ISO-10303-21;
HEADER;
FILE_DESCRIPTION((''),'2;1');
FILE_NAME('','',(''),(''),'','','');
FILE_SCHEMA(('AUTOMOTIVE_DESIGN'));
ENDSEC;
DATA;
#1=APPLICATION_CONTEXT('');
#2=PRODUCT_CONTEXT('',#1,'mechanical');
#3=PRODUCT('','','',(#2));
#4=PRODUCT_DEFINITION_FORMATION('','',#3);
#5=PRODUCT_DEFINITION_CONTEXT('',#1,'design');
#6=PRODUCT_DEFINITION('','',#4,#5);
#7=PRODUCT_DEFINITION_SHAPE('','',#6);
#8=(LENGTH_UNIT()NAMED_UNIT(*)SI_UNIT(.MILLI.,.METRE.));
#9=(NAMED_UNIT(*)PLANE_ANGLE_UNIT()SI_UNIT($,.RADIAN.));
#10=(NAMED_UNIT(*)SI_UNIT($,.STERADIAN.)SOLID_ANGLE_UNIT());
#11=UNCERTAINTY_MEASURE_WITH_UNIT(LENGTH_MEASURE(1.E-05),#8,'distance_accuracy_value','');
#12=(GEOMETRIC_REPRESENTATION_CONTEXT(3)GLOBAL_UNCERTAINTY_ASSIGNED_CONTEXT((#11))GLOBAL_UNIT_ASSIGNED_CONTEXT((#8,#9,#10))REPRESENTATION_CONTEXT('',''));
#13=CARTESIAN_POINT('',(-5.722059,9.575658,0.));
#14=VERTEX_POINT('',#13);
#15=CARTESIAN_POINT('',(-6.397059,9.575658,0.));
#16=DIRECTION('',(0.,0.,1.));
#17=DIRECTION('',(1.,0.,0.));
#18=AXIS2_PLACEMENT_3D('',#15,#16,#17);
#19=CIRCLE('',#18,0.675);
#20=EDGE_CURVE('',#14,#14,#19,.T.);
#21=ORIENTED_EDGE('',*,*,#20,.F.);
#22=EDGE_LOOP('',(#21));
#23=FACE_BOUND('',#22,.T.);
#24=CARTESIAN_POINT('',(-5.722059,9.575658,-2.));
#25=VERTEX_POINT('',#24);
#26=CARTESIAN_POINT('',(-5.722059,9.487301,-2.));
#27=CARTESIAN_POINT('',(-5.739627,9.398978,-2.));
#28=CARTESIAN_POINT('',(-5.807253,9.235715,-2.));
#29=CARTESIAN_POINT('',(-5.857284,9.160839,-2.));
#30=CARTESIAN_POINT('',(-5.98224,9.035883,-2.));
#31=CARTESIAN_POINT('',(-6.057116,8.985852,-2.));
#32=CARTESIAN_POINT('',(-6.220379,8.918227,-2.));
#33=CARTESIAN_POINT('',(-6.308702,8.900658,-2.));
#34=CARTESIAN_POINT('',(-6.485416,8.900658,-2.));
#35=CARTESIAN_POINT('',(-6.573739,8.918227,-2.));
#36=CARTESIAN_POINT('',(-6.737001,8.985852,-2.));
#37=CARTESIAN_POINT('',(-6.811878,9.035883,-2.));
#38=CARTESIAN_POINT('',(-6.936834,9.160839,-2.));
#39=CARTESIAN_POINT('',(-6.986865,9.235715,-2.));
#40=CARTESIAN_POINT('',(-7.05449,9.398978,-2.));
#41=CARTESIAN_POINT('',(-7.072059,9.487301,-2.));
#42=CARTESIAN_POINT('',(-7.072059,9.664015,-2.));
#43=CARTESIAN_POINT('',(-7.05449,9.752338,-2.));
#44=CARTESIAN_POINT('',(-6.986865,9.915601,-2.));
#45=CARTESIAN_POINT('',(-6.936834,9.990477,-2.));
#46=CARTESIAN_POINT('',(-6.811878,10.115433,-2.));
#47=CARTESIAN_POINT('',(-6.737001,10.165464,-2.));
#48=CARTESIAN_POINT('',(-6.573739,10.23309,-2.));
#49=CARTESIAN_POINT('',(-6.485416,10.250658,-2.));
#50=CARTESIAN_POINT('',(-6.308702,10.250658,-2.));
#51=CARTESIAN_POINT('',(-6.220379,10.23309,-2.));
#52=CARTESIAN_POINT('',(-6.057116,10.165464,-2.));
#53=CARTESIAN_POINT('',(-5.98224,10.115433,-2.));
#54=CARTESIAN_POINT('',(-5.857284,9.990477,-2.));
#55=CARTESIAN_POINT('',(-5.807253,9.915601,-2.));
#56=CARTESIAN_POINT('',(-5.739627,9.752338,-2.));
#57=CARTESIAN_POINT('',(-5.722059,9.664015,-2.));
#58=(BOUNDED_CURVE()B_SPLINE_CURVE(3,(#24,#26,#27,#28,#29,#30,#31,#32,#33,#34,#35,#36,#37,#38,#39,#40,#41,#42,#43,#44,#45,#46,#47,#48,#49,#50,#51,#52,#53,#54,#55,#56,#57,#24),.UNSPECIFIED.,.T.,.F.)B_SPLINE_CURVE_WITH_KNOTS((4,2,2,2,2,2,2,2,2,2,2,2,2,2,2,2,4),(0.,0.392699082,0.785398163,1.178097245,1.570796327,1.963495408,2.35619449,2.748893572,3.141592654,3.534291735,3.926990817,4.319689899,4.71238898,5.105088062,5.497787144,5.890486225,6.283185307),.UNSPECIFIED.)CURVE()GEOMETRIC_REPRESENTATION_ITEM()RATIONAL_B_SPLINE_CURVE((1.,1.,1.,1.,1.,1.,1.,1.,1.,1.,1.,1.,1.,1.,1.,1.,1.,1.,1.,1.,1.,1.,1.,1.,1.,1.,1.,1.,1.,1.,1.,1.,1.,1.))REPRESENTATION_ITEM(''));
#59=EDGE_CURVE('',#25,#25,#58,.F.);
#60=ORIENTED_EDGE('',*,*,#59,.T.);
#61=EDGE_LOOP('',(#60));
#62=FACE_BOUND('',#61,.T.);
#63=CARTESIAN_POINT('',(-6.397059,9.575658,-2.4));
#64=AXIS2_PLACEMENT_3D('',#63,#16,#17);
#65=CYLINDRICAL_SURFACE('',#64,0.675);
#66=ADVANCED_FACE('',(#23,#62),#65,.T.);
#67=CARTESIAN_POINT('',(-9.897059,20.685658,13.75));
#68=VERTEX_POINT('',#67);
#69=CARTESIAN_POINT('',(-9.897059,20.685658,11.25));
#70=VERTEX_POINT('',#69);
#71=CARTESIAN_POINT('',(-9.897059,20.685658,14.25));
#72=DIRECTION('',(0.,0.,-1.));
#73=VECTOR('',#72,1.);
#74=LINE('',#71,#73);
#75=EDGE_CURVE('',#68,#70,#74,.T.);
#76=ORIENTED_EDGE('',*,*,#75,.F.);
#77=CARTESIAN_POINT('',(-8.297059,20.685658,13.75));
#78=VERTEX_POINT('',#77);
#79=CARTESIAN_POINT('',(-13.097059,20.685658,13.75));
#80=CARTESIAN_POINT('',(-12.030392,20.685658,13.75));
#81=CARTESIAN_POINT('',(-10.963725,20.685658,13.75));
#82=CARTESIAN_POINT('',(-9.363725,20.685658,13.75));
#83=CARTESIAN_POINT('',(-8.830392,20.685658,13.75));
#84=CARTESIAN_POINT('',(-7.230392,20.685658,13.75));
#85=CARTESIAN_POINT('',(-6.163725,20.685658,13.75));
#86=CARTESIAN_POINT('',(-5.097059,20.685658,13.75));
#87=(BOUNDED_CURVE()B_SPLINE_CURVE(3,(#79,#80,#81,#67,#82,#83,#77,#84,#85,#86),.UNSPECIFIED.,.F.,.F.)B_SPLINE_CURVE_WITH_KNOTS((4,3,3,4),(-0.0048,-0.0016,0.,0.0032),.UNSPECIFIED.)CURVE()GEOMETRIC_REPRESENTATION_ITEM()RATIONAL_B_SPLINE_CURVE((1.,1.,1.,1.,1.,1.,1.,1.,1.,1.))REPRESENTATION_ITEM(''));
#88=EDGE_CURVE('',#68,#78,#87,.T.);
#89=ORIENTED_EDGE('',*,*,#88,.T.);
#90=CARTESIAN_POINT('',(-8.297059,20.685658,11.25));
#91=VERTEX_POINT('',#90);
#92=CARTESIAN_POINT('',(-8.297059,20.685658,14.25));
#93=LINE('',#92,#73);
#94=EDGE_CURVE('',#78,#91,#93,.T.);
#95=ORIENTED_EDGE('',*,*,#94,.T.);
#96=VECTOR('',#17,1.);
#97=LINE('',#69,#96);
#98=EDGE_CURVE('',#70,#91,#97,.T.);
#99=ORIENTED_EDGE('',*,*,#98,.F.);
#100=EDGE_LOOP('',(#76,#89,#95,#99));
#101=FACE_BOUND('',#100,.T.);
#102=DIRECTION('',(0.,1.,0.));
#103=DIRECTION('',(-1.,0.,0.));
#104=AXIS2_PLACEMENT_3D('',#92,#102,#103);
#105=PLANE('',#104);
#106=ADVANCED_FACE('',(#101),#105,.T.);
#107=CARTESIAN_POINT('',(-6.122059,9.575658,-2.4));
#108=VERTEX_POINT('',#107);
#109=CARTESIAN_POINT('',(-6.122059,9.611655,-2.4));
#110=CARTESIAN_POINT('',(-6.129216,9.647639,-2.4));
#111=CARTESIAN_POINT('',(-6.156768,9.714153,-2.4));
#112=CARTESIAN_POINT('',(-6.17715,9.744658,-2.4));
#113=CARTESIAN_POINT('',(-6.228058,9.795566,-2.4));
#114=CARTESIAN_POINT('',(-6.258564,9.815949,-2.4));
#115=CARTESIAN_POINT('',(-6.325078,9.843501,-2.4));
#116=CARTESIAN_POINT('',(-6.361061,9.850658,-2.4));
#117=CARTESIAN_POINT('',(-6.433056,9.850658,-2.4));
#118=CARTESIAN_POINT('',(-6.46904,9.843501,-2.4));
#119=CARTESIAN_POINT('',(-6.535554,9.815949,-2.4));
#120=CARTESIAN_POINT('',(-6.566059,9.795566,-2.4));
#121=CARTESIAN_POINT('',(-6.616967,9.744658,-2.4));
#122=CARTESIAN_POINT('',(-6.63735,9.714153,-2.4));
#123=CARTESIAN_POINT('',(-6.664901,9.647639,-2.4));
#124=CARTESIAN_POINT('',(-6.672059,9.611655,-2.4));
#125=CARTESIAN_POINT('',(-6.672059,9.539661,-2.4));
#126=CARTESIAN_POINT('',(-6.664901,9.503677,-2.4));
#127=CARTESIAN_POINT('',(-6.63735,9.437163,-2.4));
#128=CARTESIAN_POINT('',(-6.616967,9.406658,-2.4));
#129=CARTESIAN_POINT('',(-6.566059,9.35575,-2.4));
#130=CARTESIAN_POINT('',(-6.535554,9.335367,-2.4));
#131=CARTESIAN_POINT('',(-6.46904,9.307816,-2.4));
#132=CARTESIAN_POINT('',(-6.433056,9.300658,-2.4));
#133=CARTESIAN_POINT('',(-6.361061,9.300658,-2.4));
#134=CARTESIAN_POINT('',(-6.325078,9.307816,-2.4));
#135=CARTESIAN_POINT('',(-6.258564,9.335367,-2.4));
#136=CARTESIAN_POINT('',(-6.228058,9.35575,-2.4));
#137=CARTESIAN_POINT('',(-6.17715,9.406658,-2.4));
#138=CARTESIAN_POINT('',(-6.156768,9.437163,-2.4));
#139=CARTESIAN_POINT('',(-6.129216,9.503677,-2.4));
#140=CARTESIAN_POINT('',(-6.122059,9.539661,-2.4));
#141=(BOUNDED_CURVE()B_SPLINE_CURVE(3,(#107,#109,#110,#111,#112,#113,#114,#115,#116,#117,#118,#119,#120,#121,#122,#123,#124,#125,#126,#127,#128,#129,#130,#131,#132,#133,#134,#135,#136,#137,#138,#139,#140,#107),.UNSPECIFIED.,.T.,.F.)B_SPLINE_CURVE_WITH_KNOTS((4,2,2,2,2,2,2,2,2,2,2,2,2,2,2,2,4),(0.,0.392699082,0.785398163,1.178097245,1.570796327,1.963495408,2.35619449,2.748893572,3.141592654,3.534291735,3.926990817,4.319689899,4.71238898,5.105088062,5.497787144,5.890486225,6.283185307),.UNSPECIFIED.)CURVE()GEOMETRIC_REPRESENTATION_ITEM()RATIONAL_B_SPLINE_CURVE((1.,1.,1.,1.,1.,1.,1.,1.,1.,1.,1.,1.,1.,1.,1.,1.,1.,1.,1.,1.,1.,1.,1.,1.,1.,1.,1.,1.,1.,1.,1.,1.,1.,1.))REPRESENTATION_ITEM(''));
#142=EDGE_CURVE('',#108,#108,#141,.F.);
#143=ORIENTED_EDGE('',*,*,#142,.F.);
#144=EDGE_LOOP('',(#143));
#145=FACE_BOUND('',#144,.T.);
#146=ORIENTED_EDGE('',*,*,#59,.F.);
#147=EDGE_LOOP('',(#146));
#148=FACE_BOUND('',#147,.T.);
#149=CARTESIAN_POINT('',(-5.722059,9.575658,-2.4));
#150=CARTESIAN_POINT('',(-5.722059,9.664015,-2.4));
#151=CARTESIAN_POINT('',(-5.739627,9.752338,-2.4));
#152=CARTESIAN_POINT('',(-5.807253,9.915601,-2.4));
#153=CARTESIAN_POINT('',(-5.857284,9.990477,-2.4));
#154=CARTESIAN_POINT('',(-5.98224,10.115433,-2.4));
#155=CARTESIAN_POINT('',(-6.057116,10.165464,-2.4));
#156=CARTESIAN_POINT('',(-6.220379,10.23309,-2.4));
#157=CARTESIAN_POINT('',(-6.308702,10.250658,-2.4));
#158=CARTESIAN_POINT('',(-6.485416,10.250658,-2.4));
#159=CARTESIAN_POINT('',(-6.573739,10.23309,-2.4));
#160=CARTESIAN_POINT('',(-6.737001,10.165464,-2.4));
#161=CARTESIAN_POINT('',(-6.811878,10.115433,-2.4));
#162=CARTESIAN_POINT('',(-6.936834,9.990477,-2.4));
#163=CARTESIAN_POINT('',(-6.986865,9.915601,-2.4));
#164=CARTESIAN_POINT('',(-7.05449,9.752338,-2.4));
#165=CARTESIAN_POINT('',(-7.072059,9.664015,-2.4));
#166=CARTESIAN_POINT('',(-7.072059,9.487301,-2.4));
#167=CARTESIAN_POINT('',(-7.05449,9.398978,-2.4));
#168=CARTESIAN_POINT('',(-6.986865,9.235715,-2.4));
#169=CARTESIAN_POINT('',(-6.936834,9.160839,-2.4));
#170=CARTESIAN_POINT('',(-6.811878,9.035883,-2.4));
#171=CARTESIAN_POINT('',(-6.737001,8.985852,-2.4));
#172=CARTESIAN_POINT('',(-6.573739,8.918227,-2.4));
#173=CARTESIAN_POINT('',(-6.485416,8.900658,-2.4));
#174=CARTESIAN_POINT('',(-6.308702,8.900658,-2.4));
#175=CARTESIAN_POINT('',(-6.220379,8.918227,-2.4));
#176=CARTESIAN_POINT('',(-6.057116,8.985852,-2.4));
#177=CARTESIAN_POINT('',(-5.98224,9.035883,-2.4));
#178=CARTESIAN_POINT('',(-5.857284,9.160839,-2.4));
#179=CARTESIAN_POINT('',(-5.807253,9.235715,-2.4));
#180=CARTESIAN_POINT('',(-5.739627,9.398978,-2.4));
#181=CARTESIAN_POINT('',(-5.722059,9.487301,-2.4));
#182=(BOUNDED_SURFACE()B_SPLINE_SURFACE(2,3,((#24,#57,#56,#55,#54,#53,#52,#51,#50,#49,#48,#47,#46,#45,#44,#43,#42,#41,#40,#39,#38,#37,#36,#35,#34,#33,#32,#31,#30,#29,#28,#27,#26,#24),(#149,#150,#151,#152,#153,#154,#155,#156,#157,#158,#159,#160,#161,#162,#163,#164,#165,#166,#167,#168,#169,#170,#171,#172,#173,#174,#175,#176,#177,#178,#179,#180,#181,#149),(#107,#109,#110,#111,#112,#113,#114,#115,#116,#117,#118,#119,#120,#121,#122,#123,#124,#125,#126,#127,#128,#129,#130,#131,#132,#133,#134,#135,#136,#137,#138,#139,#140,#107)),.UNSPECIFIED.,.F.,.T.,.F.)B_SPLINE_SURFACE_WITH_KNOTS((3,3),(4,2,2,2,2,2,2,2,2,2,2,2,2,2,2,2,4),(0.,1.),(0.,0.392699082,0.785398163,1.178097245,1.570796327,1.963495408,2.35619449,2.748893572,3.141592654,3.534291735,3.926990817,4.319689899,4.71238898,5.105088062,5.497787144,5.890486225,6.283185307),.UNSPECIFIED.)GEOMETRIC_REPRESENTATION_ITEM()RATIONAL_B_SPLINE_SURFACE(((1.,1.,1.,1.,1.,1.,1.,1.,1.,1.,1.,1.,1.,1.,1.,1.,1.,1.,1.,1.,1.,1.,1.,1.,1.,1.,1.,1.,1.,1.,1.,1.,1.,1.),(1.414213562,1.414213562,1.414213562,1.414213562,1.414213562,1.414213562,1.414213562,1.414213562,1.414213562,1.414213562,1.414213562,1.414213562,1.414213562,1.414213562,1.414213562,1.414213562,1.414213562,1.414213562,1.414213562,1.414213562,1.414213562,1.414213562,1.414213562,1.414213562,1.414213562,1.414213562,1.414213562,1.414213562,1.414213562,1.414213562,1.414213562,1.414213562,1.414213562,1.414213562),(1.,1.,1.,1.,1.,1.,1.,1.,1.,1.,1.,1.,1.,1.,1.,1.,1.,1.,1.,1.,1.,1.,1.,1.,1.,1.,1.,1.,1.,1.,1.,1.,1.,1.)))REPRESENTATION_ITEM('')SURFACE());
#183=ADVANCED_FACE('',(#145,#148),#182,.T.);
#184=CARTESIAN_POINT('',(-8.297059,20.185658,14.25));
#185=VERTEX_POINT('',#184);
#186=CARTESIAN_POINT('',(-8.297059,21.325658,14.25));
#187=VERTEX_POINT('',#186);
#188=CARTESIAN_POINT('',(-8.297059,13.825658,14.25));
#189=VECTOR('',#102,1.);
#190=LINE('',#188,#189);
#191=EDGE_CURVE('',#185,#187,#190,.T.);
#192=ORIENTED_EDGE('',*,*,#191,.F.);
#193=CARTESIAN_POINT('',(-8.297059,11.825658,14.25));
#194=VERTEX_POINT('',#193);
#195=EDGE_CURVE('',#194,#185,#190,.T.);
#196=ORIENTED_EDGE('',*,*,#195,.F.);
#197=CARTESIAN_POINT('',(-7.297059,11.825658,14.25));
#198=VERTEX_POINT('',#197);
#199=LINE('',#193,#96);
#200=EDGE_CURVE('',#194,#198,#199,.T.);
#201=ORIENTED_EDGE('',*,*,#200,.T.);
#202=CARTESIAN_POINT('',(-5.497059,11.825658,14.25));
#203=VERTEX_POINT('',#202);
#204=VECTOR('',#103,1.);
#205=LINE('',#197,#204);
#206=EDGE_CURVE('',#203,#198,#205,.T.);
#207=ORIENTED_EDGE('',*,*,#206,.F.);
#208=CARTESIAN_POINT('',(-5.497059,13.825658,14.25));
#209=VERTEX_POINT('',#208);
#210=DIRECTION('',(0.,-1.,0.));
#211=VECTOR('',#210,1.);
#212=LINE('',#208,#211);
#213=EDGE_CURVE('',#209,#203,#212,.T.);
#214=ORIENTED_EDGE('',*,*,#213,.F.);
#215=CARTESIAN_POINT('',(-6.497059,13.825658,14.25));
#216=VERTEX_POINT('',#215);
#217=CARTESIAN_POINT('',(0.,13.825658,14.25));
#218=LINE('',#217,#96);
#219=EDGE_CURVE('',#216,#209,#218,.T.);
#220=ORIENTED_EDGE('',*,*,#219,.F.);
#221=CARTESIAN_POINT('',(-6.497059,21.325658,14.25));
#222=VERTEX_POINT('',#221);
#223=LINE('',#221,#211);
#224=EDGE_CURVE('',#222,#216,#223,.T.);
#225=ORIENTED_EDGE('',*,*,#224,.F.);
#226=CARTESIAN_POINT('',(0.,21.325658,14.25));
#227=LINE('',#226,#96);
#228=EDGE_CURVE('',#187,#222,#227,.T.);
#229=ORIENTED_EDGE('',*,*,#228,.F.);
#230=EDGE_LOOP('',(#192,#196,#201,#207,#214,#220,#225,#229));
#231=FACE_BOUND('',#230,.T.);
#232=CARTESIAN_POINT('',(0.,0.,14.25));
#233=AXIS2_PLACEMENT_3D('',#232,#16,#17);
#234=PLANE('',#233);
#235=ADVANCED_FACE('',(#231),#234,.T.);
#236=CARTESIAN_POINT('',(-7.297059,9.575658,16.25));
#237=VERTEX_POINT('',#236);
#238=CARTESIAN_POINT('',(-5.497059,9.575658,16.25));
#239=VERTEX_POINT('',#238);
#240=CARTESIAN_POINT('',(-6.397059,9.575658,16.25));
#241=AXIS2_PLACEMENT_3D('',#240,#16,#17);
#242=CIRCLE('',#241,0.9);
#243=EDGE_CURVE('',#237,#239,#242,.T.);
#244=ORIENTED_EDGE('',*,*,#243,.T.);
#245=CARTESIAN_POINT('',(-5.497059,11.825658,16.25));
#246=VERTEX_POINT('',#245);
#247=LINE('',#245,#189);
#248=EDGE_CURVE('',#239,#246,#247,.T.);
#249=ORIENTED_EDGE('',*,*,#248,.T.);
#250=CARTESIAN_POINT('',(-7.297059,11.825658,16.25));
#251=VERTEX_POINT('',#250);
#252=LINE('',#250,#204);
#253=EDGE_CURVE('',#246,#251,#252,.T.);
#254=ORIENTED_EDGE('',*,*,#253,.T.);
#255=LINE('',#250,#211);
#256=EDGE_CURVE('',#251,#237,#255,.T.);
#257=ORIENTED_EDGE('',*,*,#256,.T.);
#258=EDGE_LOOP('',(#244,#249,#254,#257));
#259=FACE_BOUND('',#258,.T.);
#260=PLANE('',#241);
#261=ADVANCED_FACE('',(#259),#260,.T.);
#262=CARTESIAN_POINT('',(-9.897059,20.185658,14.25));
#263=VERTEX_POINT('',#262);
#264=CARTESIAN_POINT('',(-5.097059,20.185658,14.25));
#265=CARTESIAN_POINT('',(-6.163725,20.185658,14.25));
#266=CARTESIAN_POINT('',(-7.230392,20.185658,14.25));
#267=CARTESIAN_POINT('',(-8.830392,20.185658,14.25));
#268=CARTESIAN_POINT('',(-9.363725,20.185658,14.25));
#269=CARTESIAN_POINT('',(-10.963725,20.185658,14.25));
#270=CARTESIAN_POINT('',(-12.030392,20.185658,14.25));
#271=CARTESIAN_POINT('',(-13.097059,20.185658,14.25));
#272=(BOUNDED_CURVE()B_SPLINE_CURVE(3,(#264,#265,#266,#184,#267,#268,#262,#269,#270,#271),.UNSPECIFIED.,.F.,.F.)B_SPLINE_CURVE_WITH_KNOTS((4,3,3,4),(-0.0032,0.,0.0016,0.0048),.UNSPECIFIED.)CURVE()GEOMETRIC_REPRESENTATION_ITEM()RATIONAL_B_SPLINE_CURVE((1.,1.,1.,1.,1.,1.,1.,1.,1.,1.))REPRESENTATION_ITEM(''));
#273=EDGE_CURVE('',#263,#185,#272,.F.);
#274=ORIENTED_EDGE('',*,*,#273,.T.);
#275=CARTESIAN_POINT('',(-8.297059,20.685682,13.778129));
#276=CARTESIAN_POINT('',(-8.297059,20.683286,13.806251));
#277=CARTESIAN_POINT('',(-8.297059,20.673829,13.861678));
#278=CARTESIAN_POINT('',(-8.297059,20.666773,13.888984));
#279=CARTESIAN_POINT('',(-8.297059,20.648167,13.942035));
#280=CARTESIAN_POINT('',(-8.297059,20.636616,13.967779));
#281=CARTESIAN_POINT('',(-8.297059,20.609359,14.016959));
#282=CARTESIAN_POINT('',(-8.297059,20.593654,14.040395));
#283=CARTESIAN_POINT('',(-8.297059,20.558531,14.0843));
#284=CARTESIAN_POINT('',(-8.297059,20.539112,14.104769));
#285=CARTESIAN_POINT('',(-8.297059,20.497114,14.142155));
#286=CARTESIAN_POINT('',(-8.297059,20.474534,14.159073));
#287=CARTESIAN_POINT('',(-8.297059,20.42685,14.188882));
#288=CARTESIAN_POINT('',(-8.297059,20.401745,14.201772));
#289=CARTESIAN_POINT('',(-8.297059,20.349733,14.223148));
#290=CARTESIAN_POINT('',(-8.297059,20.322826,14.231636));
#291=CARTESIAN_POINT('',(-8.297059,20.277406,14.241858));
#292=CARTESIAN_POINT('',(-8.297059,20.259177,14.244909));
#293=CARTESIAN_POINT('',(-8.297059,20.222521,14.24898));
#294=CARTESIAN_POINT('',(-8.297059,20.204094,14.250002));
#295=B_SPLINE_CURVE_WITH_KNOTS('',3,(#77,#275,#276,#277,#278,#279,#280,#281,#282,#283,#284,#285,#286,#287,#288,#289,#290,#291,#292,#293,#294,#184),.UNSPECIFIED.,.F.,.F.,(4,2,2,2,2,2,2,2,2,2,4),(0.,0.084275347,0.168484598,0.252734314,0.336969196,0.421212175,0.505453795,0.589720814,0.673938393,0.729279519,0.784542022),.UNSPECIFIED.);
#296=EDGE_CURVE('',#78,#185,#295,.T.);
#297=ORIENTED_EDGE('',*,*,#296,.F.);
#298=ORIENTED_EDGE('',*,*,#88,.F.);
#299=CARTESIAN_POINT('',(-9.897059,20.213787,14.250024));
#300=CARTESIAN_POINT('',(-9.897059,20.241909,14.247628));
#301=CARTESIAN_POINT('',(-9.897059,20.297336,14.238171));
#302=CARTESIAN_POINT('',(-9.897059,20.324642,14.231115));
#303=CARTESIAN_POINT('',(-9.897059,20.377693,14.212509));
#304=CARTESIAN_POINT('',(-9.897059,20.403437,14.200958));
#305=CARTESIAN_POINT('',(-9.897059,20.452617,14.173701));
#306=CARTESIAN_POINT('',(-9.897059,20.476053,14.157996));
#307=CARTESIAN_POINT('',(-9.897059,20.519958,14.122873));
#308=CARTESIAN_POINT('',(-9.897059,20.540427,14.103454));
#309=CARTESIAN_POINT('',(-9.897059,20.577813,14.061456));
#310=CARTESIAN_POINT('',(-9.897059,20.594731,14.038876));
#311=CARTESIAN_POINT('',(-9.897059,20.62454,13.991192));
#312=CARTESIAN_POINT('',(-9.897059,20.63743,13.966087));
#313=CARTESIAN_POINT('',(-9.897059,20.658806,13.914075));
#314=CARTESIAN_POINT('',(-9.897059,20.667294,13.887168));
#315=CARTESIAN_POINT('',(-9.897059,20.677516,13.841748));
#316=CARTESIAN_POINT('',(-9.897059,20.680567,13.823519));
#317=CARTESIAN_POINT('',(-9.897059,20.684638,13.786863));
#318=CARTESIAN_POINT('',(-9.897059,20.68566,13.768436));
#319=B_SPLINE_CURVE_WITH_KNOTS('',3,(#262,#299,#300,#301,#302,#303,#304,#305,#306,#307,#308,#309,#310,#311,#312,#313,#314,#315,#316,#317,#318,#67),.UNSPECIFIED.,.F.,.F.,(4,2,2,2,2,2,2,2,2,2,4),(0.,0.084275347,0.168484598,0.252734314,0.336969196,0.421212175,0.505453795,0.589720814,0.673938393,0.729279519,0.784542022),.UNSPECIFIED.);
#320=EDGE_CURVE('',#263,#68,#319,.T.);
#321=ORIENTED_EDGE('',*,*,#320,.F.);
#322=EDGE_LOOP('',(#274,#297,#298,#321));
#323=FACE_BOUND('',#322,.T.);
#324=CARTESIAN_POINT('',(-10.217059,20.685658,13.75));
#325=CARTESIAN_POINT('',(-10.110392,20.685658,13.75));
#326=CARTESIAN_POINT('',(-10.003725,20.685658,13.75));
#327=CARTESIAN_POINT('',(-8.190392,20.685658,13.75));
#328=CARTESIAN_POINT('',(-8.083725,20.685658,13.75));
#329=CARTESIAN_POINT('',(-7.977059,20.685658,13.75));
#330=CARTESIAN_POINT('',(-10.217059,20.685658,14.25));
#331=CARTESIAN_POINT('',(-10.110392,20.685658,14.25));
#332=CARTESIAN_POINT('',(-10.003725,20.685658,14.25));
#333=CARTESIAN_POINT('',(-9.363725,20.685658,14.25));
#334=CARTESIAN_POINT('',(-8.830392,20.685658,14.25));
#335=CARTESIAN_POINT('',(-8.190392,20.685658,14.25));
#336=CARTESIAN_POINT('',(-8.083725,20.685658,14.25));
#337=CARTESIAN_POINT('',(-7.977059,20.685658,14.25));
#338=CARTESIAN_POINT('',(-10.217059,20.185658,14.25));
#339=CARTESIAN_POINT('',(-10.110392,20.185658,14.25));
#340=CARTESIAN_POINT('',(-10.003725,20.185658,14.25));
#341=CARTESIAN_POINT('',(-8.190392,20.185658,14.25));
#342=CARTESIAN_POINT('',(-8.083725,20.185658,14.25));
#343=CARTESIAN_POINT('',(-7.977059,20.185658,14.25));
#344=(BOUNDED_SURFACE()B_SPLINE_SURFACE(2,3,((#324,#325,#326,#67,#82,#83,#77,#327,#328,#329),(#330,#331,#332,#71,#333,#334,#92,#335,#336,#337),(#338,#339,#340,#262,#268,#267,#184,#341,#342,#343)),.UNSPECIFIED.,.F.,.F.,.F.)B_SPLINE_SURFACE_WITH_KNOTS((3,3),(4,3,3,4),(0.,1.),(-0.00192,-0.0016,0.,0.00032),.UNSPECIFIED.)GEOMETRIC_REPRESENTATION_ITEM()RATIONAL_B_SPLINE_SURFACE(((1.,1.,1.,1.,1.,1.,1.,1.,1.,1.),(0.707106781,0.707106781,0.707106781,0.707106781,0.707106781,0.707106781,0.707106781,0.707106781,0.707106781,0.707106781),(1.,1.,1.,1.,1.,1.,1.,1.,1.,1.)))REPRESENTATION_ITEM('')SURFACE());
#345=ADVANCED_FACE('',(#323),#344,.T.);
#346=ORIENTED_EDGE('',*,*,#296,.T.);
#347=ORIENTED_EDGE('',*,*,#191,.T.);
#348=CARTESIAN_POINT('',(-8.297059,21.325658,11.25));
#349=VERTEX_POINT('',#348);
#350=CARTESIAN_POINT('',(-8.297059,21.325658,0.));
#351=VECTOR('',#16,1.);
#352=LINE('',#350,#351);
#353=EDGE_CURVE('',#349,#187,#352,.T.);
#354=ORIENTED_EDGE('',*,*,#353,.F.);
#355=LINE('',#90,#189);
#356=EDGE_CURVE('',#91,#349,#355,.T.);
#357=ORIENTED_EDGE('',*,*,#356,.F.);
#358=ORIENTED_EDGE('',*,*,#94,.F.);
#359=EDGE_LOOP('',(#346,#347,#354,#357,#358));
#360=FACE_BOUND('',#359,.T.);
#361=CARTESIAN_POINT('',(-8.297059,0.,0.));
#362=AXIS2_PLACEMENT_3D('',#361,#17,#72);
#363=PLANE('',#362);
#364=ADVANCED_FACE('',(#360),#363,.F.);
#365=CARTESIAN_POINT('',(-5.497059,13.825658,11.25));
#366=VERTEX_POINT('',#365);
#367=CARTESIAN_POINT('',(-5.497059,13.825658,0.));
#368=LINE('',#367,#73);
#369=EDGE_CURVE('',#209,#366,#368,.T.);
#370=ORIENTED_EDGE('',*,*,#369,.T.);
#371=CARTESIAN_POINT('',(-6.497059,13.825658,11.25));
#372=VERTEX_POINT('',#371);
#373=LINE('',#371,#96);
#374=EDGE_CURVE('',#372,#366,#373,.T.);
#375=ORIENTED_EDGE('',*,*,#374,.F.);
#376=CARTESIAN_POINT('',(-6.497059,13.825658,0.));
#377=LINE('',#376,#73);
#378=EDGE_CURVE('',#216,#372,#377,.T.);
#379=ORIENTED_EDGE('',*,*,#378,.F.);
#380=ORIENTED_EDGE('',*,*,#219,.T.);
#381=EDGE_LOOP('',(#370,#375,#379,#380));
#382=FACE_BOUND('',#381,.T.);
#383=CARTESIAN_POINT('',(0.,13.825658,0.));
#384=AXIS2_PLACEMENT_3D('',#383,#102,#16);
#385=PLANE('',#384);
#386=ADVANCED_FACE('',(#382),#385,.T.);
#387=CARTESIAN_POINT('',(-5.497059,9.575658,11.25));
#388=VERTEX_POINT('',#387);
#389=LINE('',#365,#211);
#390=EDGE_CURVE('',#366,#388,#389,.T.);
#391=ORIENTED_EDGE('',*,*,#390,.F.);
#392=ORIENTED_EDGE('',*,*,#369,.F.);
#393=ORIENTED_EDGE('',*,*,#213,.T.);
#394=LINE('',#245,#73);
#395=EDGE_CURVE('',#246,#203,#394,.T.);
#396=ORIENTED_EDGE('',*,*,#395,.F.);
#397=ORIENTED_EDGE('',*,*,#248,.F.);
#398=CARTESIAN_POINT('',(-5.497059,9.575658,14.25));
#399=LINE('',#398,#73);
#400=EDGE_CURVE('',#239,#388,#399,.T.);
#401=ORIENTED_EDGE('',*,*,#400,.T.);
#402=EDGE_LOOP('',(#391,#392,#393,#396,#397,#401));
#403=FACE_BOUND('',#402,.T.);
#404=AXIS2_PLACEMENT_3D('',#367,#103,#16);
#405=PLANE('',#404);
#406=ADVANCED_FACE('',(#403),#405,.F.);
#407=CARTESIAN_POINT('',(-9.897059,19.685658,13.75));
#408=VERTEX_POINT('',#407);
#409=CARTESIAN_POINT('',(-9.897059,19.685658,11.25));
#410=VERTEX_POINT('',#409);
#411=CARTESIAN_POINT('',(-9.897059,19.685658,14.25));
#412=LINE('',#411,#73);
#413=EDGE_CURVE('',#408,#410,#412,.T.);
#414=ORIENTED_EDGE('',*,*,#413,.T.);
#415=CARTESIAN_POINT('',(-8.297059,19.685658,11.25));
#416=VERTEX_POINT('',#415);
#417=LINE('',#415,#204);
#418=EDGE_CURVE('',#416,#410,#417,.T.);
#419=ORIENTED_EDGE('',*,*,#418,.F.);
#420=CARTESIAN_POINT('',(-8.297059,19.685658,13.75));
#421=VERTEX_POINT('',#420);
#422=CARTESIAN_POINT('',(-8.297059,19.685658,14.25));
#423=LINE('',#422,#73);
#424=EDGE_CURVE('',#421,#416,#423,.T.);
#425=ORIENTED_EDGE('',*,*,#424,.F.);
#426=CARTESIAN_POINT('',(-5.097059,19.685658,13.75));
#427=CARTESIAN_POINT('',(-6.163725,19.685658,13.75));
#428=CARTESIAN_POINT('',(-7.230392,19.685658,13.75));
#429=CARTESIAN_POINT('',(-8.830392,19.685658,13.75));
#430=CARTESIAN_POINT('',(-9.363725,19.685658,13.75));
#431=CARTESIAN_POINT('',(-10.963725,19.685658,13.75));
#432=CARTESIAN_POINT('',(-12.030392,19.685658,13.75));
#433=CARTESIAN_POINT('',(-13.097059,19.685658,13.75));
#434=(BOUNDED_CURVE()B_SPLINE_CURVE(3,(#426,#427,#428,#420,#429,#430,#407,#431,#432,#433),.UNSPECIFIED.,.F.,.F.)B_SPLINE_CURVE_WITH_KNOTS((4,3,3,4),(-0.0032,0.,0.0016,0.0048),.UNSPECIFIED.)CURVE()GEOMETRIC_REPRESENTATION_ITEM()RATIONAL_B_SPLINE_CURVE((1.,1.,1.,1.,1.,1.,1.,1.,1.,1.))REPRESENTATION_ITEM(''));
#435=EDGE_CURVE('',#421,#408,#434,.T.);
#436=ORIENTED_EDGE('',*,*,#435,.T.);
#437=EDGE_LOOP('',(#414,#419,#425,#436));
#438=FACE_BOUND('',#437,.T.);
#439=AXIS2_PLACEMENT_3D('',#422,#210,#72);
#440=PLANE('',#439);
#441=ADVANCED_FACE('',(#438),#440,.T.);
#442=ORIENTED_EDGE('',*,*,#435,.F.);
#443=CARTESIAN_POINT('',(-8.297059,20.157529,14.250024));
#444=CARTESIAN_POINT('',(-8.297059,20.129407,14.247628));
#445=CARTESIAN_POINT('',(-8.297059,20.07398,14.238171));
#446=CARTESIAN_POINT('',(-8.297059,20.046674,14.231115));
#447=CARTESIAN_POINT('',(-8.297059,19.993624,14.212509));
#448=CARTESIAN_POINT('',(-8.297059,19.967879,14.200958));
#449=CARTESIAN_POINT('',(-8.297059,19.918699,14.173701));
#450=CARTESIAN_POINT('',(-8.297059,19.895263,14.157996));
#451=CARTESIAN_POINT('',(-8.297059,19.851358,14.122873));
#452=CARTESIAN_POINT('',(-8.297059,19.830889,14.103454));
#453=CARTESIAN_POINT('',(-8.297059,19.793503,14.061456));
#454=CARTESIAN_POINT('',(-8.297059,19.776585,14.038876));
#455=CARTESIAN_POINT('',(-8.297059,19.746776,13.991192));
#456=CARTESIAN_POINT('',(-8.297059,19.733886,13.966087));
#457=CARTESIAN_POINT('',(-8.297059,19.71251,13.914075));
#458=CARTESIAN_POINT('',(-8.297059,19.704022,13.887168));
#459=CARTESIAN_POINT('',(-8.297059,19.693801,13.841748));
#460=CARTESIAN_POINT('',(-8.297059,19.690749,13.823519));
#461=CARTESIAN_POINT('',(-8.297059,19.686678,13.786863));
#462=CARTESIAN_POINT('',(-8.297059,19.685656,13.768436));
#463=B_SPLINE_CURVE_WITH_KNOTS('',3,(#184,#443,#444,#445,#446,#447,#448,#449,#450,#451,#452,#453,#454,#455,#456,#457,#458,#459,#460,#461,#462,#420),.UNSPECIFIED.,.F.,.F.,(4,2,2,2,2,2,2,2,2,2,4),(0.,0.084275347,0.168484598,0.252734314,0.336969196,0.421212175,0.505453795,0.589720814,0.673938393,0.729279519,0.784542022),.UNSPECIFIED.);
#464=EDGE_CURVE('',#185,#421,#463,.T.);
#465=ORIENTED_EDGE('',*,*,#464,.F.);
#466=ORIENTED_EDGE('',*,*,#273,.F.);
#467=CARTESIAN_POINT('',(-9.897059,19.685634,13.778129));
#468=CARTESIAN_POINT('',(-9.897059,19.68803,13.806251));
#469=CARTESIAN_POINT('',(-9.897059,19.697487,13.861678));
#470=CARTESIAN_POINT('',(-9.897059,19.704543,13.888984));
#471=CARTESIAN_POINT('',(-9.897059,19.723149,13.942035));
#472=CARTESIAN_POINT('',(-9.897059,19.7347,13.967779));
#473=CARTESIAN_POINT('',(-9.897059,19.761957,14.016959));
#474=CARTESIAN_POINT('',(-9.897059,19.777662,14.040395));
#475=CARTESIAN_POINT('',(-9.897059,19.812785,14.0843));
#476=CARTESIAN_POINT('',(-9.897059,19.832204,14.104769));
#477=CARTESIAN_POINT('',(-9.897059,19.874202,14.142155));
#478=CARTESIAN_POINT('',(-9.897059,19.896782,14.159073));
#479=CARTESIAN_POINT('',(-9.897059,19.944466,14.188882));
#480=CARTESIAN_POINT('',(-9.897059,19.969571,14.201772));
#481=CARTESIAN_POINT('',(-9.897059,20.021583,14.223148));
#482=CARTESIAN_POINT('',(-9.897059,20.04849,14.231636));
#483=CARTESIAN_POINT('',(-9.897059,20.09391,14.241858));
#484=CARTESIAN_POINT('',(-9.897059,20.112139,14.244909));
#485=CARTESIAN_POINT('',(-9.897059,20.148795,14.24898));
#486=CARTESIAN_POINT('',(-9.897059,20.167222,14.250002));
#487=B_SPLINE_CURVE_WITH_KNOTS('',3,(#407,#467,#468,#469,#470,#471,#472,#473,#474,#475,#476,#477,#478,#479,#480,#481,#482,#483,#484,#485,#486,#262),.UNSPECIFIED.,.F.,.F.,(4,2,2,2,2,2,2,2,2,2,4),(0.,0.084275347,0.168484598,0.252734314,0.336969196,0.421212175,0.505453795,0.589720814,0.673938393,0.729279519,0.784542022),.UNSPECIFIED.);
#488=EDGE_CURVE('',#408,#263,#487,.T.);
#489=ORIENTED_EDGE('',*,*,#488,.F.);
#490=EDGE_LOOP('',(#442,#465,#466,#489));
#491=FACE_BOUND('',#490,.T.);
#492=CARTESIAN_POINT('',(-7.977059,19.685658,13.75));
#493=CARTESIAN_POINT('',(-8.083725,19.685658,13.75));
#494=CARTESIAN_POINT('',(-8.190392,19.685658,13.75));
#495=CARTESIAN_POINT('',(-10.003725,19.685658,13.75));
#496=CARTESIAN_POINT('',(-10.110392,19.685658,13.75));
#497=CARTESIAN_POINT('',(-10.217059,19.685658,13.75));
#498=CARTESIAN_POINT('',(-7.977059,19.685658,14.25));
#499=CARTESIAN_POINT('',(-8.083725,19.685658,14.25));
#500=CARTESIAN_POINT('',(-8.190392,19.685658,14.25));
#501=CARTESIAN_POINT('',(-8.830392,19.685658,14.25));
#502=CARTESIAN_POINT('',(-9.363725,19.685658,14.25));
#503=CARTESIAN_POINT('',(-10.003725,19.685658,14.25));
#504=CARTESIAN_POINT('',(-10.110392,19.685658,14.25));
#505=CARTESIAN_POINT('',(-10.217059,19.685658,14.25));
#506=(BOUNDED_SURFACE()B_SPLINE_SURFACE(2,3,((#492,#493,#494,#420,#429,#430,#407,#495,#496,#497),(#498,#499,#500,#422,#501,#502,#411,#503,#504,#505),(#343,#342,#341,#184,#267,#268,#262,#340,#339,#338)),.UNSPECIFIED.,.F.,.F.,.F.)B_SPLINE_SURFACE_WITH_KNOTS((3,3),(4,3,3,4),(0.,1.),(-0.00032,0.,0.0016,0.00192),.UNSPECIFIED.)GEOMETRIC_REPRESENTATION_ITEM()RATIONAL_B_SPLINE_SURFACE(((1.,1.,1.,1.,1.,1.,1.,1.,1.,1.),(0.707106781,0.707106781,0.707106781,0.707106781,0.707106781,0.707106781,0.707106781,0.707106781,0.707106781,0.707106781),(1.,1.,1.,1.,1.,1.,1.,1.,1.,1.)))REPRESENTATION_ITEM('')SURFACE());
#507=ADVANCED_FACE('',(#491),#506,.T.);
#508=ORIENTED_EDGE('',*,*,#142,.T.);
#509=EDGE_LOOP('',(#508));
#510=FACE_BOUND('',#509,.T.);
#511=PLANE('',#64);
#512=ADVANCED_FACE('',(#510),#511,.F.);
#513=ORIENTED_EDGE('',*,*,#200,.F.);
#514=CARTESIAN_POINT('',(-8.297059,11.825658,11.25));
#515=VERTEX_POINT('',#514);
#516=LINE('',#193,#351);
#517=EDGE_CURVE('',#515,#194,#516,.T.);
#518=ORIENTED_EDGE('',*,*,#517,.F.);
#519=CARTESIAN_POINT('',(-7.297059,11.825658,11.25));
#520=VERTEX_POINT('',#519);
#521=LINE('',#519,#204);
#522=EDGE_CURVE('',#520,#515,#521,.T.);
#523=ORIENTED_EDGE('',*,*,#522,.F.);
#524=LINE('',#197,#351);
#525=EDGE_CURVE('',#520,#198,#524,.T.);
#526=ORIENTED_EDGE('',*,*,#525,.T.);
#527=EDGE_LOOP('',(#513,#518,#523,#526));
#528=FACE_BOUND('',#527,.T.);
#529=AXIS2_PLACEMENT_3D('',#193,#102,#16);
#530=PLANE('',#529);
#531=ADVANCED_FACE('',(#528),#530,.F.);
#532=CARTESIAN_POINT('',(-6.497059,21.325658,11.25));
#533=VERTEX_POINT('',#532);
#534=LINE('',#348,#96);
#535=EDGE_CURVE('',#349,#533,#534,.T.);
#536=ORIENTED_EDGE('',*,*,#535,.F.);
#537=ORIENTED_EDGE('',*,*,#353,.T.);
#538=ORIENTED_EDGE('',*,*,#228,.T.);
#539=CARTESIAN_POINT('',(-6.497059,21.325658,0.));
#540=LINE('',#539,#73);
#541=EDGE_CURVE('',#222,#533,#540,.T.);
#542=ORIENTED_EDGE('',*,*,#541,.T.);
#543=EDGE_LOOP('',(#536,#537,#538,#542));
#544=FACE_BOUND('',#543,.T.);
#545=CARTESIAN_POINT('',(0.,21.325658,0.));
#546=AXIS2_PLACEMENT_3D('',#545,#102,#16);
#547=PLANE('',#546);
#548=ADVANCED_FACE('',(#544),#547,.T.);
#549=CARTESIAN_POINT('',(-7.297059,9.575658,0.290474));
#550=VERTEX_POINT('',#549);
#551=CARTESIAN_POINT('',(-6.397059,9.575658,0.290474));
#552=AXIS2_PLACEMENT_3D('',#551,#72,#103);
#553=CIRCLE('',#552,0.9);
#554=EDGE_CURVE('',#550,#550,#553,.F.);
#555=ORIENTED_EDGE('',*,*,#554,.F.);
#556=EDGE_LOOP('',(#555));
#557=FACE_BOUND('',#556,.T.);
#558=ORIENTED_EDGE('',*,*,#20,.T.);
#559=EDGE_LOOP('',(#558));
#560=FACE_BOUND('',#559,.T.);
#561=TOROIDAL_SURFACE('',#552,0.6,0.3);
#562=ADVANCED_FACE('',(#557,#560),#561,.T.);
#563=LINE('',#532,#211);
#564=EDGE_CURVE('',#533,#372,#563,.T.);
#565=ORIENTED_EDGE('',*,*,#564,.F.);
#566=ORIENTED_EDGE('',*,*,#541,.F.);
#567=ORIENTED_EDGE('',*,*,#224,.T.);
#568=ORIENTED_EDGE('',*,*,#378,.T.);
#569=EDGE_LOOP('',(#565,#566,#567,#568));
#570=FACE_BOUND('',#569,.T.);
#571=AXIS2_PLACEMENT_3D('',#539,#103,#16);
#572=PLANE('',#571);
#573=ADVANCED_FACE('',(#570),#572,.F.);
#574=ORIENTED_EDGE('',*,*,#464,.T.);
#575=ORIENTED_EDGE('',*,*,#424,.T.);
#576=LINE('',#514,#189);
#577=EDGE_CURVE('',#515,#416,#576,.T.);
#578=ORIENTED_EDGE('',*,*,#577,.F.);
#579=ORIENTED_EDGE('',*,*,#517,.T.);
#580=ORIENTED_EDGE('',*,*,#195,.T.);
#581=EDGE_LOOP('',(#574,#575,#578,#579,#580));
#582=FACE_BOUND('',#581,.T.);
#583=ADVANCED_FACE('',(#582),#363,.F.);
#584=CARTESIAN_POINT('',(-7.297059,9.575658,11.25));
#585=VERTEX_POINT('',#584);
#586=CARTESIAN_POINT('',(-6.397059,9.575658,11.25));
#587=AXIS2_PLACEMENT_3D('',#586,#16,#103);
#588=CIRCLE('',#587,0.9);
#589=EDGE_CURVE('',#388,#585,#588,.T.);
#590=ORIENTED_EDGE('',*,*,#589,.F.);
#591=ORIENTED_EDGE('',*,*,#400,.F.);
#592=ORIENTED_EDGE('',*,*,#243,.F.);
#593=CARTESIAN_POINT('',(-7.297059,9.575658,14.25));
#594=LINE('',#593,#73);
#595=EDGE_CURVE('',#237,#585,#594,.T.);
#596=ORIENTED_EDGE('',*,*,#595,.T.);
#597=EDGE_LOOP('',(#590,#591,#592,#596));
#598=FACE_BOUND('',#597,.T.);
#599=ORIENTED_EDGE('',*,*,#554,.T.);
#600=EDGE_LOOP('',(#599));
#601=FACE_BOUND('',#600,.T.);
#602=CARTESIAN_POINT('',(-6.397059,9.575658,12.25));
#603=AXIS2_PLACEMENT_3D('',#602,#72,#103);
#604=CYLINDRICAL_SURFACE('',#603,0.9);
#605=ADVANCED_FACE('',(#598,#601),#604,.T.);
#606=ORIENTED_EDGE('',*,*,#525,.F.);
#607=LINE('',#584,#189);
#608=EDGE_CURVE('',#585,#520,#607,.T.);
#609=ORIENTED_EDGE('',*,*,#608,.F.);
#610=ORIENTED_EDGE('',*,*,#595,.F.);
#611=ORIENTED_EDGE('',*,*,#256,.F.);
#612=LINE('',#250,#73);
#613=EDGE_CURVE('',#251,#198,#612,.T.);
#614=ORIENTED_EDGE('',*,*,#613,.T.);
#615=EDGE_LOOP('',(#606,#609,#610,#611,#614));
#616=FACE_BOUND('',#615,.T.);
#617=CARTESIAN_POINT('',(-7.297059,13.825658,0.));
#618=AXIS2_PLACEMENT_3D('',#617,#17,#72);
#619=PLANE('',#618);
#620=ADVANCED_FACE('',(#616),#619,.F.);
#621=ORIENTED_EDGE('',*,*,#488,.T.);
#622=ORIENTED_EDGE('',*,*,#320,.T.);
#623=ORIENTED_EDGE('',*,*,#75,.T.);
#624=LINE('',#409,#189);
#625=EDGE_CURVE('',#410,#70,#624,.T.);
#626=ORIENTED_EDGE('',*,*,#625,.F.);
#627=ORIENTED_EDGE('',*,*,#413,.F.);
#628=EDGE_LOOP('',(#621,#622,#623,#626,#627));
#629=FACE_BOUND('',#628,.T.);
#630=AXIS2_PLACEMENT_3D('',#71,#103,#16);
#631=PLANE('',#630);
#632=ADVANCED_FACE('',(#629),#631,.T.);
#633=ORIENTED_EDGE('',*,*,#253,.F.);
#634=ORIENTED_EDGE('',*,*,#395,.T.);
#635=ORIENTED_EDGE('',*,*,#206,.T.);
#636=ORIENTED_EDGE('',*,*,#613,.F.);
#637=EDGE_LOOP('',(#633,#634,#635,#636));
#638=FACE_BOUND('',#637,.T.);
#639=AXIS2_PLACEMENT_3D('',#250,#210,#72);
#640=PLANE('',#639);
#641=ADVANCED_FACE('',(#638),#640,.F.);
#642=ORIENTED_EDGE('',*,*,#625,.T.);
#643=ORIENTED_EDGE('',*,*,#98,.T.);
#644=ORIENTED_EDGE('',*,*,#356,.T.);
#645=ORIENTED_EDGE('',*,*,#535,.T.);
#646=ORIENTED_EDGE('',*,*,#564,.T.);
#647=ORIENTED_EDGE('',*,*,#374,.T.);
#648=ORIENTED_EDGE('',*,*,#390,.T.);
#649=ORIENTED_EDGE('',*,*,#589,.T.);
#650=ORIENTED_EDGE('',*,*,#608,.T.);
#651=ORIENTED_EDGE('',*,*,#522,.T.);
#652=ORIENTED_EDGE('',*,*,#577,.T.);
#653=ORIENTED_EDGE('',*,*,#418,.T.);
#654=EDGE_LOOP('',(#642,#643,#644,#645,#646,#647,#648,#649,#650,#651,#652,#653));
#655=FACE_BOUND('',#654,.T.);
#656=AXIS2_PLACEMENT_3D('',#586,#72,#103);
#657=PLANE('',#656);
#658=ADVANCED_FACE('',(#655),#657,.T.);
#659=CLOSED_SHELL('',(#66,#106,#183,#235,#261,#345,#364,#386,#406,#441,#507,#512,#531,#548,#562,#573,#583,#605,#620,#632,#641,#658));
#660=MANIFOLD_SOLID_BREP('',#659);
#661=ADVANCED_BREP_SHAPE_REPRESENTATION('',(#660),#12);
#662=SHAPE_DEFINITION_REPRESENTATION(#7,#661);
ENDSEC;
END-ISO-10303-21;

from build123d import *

# Parameters (mm, degrees)
CROQUIS1_R              = 0.675
SALIENTE_EXTRUIR1_DEPTH = 2.4
REDONDEO1_SIZE          = 0.4
CROQUIS2_R              = 0.9
SALIENTE_EXTRUIR2_DEPTH = 12.25
SALIENTE_EXTRUIR3_DEPTH = 2
CROQUIS4_W              = 1.8
CROQUIS4_H              = 2
SALIENTE_EXTRUIR4_DEPTH = 4.25
CROQUIS6_W              = 2
CROQUIS6_H              = 2
SALIENTE_EXTRUIR5_DEPTH = 1
CROQUIS7_W              = 1.8
CROQUIS7_H              = 2
SALIENTE_EXTRUIR6_DEPTH = 7.5
CROQUIS9_W              = 1.6
CROQUIS9_H              = 1
SALIENTE_EXTRUIR7_DEPTH = 2
REDONDEO2_START         = -9.897058824
REDONDEO2_DEPTH         = 1.6
SALIENTE_EXTRUIR8_START = 1
SALIENTE_EXTRUIR8_DEPTH = 1
SALIENTE_EXTRUIR9_DEPTH = 2
REDONDEO3_R             = 0.3


with BuildPart() as part:
    # Croquis1 → Saliente-Extruir1 (new body)
    with BuildSketch(Plane.XY):
        with Locations((-6.397058824, 9.575658077)):
            Circle(CROQUIS1_R)
    extrude(amount=-SALIENTE_EXTRUIR1_DEPTH)

    # Redondeo1
    # a fillet whose section is not a circle: 0.4 mm, written as the material it takes off along each edge
    with BuildSketch(Plane(origin=(-6.397058824, 9.575658077, -2.4), x_dir=(1, 0, 0), z_dir=(0, -1, 0))) as redondeo1_piece_1:
        with BuildLine():
            Bezier((0.675, REDONDEO1_SIZE), (0.675, 0), (0.675 - REDONDEO1_SIZE, 0), weights=[1, 1.414213562, 1])
            Line((0.675 - REDONDEO1_SIZE, 0), (0.675, 0))
            Line((0.675, 0), (0.675, REDONDEO1_SIZE))
        make_face()
    revolve(axis=Axis((-6.397058824, 9.575658077, -2.4), (0, 0, 1)), mode=Mode.SUBTRACT)

    # Croquis2 → Saliente-Extruir2 (add)
    with BuildSketch(Plane.XY):
        with Locations((-6.397058824, 9.575658077)):
            Circle(CROQUIS2_R)
    extrude(amount=SALIENTE_EXTRUIR2_DEPTH)

    # Croquis3 → Saliente-Extruir3 (add)
    with BuildSketch(Plane.XY.offset(12.25)):
        with BuildLine():
            Line((-5.497058824, 9.575658077), (-7.297058824, 9.575658077))
            ThreePointArc((-7.297058824, 9.575658077), (-6.397058824, 8.675658077), (-5.497058824, 9.575658077))
        make_face()
    extrude(amount=SALIENTE_EXTRUIR3_DEPTH)

    # Croquis4 → Saliente-Extruir4 (add)
    with BuildSketch(Plane(origin=(0, 9.575658077, 0), x_dir=(1, 0, 0), z_dir=(0, 1, 0))):
        with Locations((-6.397058824, -13.25)):
            Rectangle(CROQUIS4_W, CROQUIS4_H)
    extrude(amount=SALIENTE_EXTRUIR4_DEPTH)

    # Croquis6 → Saliente-Extruir5 (add)
    with BuildSketch(Plane.ZY.offset(7.297058824)):
        with Locations((13.25, 12.825658077)):
            Rectangle(CROQUIS6_W, CROQUIS6_H)
    extrude(amount=SALIENTE_EXTRUIR5_DEPTH)

    # Croquis7 → Saliente-Extruir6 (add)
    with BuildSketch(Plane(origin=(0, 13.825658077, 0), x_dir=(1, 0, 0), z_dir=(0, 1, 0))):
        with Locations((-7.397058824, -13.25)):
            Rectangle(CROQUIS7_W, CROQUIS7_H)
    extrude(amount=SALIENTE_EXTRUIR6_DEPTH)

    # Croquis9 → Saliente-Extruir7 (add)
    with BuildSketch(Plane(origin=(0, 0, 12.25), x_dir=(-1, 0, 0), z_dir=(0, 0, -1))):
        with Locations((9.097058824, 20.185658077)):
            Rectangle(CROQUIS9_W, CROQUIS9_H)
    extrude(amount=-SALIENTE_EXTRUIR7_DEPTH)

    # Redondeo2: read off the stored shape, not the designer's step
    # Redondeo2 outline → Redondeo2 (cut)
    with BuildSketch(Plane.YZ.offset(REDONDEO2_START)):
        with BuildLine():
            Line((19.685658077, 14.25), (19.685658077, 13.75))
            add(Edge.make_bspline(
                [(19.685658077, 13.75), (19.685658077, 14.25), (20.185658077, 14.25)],
                knots=[0, 0, 0, 1, 1, 1], degree=2, weights=[1, 0.707106781, 1]))
            Line((20.185658077, 14.25), (19.685658077, 14.25))
        make_face()
        with BuildLine():
            Line((20.685658077, 14.25), (20.185658077, 14.25))
            add(Edge.make_bspline(
                [(20.685658077, 13.75), (20.685658077, 14.25), (20.185658077, 14.25)],
                knots=[0, 0, 0, 1, 1, 1], degree=2, weights=[1, 0.707106781, 1]))
            Line((20.685658077, 13.75), (20.685658077, 14.25))
        make_face()
    extrude(amount=REDONDEO2_DEPTH, mode=Mode.SUBTRACT)

    # Croquis10 → Saliente-Extruir8 (add)
    with BuildSketch(Plane(origin=(0, 0, 12.25), x_dir=(-1, 0, 0), z_dir=(0, 0, -1)).offset(SALIENTE_EXTRUIR8_START)):
        with BuildLine():
            Line((7.297058824, 9.575658077), (7.297058824, 11.825658077))
            Line((7.297058824, 11.825658077), (8.297058824, 11.825658077))
            Line((8.297058824, 11.825658077), (8.297058824, 19.685658077))
            Line((8.297058824, 19.685658077), (9.897058824, 19.685658077))
            Line((9.897058824, 19.685658077), (9.897058824, 20.685658077))
            Line((9.897058824, 20.685658077), (8.297058824, 20.685658077))
            Line((8.297058824, 20.685658077), (8.297058824, 21.325658077))
            Line((8.297058824, 21.325658077), (6.497058824, 21.325658077))
            Line((6.497058824, 21.325658077), (6.497058824, 13.825658077))
            Line((6.497058824, 13.825658077), (5.497058824, 13.825658077))
            Line((5.497058824, 13.825658077), (5.497058824, 9.575658077))
            ThreePointArc((5.497058824, 9.575658077), (6.397058824, 10.475658077), (7.297058824, 9.575658077))
        make_face()
    extrude(amount=-SALIENTE_EXTRUIR8_DEPTH)

    # Croquis11 → Saliente-Extruir9 (add)
    with BuildSketch(Plane.XY.offset(14.25)):
        with BuildLine():
            Line((-7.297058824, 11.825658077), (-5.497058824, 11.825658077))
            Line((-5.497058824, 11.825658077), (-5.497058824, 9.575658077))
            ThreePointArc((-5.497058824, 9.575658077), (-6.397058824, 8.675658077), (-7.297058824, 9.575658077))
            Line((-7.297058824, 9.575658077), (-7.297058824, 11.825658077))
        make_face()
    extrude(amount=SALIENTE_EXTRUIR9_DEPTH)

    # Redondeo3
    # the kernel refuses this fillet: 0.3 mm, written as the material it takes off along each edge
    with BuildSketch(Plane(origin=(-6.397058824, 9.575658077, 0), x_dir=(1, 0, 0), z_dir=(0, -1, 0))) as redondeo3_piece_1:
        with BuildLine():
            CenterArc((0.6, 0.290473751), REDONDEO3_R, 284.477512185, 75.522487815)
            Line((0.675, 0), (0.6765, -0.005809475))
            ThreePointArc((0.6765, -0.005809475), (0.7875, -0.006), (0.9, -0.006))
            Line((0.9, -0.006), (0.906, 0))
            Line((0.906, 0), (0.906, 0.290473751))
            Line((0.906, 0.290473751), (0.9, 0.290473751))
        make_face()
    revolve(axis=Axis((-6.397058824, 9.575658077, 0), (0, 0, 1)), mode=Mode.SUBTRACT)


solid = part.part
